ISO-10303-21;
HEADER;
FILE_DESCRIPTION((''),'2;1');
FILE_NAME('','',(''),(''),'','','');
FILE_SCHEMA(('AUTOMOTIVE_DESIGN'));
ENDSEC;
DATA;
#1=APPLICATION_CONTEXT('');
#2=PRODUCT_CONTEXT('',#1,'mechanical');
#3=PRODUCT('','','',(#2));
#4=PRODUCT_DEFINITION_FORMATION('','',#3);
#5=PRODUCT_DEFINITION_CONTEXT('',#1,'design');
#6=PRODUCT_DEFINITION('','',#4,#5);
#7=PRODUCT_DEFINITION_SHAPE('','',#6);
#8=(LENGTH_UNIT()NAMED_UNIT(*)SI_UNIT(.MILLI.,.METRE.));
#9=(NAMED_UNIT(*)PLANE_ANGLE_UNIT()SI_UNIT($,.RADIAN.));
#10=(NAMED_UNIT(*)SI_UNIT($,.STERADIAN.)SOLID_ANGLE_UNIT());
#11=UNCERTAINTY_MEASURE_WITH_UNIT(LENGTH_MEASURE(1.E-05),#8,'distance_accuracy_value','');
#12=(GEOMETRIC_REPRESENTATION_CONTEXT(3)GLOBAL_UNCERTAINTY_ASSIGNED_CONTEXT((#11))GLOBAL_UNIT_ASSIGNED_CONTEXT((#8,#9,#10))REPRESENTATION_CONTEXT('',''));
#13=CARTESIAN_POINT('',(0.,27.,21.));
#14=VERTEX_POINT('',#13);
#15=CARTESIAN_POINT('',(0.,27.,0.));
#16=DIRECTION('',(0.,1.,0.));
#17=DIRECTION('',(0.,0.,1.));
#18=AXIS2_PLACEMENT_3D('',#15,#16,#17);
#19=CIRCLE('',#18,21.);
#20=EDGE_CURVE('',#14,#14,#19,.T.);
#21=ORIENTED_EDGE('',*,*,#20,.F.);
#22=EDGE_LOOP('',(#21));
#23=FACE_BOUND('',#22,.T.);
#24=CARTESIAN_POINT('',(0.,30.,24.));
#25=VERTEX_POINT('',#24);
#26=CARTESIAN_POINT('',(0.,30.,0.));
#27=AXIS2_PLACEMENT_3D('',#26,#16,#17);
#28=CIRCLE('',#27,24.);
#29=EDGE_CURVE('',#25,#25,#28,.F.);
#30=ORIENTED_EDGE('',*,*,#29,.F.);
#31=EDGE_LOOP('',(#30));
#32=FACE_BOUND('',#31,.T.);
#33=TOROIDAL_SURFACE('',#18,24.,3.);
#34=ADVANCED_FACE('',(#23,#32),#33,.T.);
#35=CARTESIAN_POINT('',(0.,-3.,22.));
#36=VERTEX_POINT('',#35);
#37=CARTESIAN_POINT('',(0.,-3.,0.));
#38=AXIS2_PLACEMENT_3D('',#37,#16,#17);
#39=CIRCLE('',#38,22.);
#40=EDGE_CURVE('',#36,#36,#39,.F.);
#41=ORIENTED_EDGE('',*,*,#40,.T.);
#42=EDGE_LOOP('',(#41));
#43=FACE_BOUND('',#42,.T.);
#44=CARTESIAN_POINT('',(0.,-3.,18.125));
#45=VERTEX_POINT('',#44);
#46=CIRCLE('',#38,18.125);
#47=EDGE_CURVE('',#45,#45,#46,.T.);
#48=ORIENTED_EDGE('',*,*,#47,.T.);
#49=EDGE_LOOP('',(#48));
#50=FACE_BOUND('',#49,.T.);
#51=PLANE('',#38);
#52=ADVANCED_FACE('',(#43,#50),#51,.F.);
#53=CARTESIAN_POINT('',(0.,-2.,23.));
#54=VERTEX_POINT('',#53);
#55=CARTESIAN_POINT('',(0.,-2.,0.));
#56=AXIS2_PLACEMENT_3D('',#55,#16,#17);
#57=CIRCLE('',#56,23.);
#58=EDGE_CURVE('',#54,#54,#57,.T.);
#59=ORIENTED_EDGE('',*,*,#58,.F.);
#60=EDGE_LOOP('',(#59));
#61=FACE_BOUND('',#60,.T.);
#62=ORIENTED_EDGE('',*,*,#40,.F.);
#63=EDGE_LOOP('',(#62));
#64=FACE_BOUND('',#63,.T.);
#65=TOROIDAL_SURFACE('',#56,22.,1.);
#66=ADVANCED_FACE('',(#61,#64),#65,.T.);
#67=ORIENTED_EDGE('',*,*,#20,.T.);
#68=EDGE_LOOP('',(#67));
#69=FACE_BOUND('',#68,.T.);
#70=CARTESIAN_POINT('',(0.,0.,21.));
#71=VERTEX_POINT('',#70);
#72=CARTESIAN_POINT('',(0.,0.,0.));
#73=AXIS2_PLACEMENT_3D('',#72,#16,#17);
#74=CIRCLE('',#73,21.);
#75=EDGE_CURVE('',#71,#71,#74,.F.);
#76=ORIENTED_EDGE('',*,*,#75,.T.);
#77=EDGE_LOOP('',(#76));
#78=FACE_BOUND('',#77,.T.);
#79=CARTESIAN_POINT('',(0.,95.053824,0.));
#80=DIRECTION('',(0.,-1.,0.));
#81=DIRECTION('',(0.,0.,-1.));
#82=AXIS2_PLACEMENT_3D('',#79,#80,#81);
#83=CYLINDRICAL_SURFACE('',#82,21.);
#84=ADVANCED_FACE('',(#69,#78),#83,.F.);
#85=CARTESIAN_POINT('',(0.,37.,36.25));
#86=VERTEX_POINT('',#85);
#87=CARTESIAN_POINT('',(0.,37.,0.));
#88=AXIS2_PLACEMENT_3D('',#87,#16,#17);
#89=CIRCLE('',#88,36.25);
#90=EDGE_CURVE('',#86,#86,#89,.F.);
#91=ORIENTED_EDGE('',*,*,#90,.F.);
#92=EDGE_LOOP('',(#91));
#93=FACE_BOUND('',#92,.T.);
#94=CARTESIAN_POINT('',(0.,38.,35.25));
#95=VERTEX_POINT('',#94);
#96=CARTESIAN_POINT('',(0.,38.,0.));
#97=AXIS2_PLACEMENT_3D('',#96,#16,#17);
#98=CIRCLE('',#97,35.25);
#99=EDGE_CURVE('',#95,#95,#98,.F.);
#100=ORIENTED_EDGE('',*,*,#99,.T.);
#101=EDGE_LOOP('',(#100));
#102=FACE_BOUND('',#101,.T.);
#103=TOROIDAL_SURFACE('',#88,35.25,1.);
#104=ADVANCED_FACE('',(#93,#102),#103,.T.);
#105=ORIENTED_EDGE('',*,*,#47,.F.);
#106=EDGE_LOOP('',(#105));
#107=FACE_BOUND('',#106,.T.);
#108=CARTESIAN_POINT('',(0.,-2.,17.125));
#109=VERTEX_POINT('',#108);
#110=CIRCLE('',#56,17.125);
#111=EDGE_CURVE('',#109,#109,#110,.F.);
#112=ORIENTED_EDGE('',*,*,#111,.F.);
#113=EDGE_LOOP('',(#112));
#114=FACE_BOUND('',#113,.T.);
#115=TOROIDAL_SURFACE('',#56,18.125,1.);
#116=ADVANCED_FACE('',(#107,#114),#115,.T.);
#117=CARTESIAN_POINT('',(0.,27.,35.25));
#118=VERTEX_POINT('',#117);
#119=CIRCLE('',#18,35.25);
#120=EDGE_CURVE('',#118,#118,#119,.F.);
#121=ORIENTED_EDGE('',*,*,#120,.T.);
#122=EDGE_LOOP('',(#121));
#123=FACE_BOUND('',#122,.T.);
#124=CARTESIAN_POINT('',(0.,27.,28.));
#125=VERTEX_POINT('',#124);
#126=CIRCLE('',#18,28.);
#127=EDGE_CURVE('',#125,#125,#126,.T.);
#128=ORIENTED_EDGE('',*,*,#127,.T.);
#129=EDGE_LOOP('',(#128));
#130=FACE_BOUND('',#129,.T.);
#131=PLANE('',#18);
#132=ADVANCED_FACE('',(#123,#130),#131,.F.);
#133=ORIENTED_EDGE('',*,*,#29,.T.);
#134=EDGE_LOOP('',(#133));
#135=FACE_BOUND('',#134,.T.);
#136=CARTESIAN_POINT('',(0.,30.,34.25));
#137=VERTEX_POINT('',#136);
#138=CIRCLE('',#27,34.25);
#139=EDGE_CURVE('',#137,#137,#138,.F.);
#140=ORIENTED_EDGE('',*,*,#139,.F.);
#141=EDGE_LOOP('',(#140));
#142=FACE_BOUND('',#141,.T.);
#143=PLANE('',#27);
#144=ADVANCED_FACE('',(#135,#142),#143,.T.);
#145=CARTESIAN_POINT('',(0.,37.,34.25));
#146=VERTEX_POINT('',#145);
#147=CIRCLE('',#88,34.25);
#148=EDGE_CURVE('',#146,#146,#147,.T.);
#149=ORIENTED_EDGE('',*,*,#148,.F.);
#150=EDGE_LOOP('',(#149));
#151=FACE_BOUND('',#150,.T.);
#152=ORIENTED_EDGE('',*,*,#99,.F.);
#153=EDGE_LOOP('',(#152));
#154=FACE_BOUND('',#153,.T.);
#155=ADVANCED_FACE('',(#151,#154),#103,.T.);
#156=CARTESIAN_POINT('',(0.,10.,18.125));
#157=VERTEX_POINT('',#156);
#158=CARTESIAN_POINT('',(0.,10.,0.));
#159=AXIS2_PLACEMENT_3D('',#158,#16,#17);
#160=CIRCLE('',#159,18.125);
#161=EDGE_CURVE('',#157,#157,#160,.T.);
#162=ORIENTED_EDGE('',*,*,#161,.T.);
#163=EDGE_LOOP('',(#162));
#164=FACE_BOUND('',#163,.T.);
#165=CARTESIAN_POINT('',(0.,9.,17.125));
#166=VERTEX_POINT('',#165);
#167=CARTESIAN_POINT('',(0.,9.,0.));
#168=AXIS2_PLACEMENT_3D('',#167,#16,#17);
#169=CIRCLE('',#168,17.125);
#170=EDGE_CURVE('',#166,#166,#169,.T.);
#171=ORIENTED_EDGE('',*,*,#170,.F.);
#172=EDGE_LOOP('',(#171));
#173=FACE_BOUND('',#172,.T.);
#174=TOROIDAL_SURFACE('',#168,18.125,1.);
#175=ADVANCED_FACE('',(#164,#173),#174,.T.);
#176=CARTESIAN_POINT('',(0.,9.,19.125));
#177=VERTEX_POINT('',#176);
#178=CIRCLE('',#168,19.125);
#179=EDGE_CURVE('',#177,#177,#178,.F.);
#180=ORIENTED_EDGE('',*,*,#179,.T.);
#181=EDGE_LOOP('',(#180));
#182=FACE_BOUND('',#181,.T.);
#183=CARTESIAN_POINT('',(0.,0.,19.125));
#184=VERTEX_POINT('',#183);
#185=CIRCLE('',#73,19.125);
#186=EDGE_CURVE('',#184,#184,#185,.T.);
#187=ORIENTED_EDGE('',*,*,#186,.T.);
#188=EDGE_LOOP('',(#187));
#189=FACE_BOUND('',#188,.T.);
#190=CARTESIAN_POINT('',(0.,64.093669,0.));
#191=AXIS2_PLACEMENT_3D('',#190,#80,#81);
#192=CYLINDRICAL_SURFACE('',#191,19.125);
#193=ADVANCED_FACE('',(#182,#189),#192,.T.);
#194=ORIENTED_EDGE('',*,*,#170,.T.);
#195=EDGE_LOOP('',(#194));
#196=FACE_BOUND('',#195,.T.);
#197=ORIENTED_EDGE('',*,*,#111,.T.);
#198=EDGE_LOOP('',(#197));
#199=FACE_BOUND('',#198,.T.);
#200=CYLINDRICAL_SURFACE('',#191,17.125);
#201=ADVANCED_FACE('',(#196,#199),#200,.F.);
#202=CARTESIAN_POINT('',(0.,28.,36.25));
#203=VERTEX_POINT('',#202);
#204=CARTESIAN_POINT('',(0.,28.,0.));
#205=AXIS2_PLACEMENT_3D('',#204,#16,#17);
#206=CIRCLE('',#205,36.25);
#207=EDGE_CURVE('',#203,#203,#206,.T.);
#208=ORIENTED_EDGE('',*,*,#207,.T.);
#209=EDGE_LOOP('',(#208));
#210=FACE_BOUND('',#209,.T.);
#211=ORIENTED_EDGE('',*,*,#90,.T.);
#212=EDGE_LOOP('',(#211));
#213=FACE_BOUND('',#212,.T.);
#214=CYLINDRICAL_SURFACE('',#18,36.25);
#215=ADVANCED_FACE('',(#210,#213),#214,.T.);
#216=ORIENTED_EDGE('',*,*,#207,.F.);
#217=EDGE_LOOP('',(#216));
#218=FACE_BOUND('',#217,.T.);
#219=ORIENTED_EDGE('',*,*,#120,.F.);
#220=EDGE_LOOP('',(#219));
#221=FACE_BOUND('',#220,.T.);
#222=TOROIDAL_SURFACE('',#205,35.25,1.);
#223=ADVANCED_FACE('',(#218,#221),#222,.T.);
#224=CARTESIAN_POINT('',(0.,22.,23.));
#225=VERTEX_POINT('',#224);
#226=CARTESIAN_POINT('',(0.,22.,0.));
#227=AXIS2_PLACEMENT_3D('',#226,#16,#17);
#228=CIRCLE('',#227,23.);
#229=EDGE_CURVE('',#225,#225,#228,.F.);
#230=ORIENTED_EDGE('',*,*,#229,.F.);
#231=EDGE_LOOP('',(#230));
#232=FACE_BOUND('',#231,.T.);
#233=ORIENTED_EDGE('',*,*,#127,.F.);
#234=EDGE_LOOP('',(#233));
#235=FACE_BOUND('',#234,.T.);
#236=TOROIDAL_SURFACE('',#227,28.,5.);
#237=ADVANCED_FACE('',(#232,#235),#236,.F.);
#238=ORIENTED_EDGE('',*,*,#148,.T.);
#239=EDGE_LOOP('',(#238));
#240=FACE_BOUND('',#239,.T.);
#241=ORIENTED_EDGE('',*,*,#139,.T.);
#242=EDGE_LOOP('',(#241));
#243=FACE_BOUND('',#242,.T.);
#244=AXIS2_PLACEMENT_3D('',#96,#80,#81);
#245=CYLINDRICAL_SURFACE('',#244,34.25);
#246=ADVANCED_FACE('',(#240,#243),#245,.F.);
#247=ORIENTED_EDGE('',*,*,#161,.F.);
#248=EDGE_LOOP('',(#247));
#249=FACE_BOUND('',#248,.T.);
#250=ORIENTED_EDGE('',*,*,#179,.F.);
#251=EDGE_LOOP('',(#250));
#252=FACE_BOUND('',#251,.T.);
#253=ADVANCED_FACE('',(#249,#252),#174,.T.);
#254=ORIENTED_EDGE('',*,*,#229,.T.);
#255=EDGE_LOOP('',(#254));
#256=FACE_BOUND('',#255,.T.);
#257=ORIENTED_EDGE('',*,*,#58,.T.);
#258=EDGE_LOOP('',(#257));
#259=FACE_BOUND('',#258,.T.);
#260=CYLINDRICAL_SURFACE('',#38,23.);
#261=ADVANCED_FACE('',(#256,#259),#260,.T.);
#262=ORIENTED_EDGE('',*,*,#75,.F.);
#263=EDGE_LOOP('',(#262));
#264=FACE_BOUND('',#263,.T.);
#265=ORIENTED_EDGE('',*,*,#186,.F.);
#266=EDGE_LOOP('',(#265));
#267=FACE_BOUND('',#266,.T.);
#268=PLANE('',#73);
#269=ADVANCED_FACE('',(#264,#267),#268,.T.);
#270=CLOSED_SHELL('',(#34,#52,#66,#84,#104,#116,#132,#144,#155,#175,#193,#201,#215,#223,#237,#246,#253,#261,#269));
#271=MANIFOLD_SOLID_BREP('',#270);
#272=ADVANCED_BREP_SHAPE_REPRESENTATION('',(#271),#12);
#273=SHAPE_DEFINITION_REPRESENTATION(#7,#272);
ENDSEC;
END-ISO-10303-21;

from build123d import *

# Parameters (mm, degrees)
SKETCH1_R           = 19.125
SKETCH1_R_2         = 17.125
BOSS_EXTRUDE1_DEPTH = 10
SKETCH2_R           = 23
SKETCH2_R_2         = 21
BOSS_EXTRUDE2_DEPTH = 30
BOSS_EXTRUDE3_START = -3
SKETCH3_R           = 23
SKETCH3_R_2         = 17.125
BOSS_EXTRUDE3_DEPTH = 3
BOSS_EXTRUDE4_START = -3
SKETCH4_R           = 36.25
SKETCH4_R_2         = 21
BOSS_EXTRUDE4_DEPTH = 3
SKETCH5_R           = 36.25
SKETCH5_R_2         = 34.25
BOSS_EXTRUDE5_DEPTH = 8
FILLET1_R           = 5
FILLET2_R           = 3
FILLET3_R           = 1


with BuildPart() as part:
    # Sketch1 → Boss-Extrude1 (new body)
    with BuildSketch(Plane(origin=(0, 0, 0), x_dir=(1, 0, 0), z_dir=(0, 1, 0))):
        with Locations(Location((0, 0, 0), (0, 0, 270))):
            Circle(SKETCH1_R)
        with Locations(Location((0, 0, 0), (0, 0, 270))):
            Circle(SKETCH1_R_2, mode=Mode.SUBTRACT)
    extrude(amount=BOSS_EXTRUDE1_DEPTH)



with BuildPart() as body_2:
    # Sketch2 → Boss-Extrude2 (new body)
    with BuildSketch(Plane(origin=(0, 0, 0), x_dir=(1, 0, 0), z_dir=(0, 1, 0))):
        with Locations(Location((0, 0, 0), (0, 0, 270))):
            Circle(SKETCH2_R)
        with Locations(Location((0, 0, 0), (0, 0, 270))):
            Circle(SKETCH2_R_2, mode=Mode.SUBTRACT)
    extrude(amount=BOSS_EXTRUDE2_DEPTH)


with BuildPart() as part_1:
    add(part.part)

    add(body_2.part)  # Boss-Extrude3 merges body 2
    # Sketch3 → Boss-Extrude3 (add)
    with BuildSketch(Plane(origin=(0, 0, 0), x_dir=(1, 0, 0), z_dir=(0, 1, 0)).offset(BOSS_EXTRUDE3_START)):
        with Locations(Location((0, 0, 0), (0, 0, 270))):
            Circle(SKETCH3_R)
        with Locations(Location((0, 0, 0), (0, 0, 270))):
            Circle(SKETCH3_R_2, mode=Mode.SUBTRACT)
    extrude(amount=BOSS_EXTRUDE3_DEPTH)

    # Sketch4 → Boss-Extrude4 (add)
    with BuildSketch(Plane(origin=(0, 30, 0), x_dir=(1, 0, 0), z_dir=(0, 1, 0)).offset(BOSS_EXTRUDE4_START)):
        with Locations(Location((0, 0, 0), (0, 0, 270))):
            Circle(SKETCH4_R)
        with Locations(Location((0, 0, 0), (0, 0, 270))):
            Circle(SKETCH4_R_2, mode=Mode.SUBTRACT)
    extrude(amount=BOSS_EXTRUDE4_DEPTH)

    # Sketch5 → Boss-Extrude5 (add)
    with BuildSketch(Plane(origin=(0, 30, 0), x_dir=(1, 0, 0), z_dir=(0, 1, 0))):
        with Locations(Location((0, 0, 0), (0, 0, 270))):
            Circle(SKETCH5_R)
        with Locations(Location((0, 0, 0), (0, 0, 270))):
            Circle(SKETCH5_R_2, mode=Mode.SUBTRACT)
    extrude(amount=BOSS_EXTRUDE5_DEPTH)

    # Fillet1
    fillet1_edges = [part_1.edges().sort_by_distance(p)[0] for p in [
        (0, 27, -23),
    ]]
    fillet(fillet1_edges, radius=FILLET1_R)

    # Fillet2
    fillet2_edges = [part_1.edges().sort_by_distance(p)[0] for p in [
        (0, 30, -21),
    ]]
    fillet(fillet2_edges, radius=FILLET2_R)

    # Fillet3
    fillet3_edges = [part_1.edges().sort_by_distance(p)[0] for p in [
        (0, 10, -19.125),
        (0, -3, -23),
        (0, -3, -17.125),
        (0, 27, -36.25),
        (0, 38, -34.25),
        (0, 38, -36.25),
        (0, 10, -17.125),
    ]]
    fillet(fillet3_edges, radius=FILLET3_R - 0.0001)  # a hair under: the kernel refuses the full size


solid = part_1.part
